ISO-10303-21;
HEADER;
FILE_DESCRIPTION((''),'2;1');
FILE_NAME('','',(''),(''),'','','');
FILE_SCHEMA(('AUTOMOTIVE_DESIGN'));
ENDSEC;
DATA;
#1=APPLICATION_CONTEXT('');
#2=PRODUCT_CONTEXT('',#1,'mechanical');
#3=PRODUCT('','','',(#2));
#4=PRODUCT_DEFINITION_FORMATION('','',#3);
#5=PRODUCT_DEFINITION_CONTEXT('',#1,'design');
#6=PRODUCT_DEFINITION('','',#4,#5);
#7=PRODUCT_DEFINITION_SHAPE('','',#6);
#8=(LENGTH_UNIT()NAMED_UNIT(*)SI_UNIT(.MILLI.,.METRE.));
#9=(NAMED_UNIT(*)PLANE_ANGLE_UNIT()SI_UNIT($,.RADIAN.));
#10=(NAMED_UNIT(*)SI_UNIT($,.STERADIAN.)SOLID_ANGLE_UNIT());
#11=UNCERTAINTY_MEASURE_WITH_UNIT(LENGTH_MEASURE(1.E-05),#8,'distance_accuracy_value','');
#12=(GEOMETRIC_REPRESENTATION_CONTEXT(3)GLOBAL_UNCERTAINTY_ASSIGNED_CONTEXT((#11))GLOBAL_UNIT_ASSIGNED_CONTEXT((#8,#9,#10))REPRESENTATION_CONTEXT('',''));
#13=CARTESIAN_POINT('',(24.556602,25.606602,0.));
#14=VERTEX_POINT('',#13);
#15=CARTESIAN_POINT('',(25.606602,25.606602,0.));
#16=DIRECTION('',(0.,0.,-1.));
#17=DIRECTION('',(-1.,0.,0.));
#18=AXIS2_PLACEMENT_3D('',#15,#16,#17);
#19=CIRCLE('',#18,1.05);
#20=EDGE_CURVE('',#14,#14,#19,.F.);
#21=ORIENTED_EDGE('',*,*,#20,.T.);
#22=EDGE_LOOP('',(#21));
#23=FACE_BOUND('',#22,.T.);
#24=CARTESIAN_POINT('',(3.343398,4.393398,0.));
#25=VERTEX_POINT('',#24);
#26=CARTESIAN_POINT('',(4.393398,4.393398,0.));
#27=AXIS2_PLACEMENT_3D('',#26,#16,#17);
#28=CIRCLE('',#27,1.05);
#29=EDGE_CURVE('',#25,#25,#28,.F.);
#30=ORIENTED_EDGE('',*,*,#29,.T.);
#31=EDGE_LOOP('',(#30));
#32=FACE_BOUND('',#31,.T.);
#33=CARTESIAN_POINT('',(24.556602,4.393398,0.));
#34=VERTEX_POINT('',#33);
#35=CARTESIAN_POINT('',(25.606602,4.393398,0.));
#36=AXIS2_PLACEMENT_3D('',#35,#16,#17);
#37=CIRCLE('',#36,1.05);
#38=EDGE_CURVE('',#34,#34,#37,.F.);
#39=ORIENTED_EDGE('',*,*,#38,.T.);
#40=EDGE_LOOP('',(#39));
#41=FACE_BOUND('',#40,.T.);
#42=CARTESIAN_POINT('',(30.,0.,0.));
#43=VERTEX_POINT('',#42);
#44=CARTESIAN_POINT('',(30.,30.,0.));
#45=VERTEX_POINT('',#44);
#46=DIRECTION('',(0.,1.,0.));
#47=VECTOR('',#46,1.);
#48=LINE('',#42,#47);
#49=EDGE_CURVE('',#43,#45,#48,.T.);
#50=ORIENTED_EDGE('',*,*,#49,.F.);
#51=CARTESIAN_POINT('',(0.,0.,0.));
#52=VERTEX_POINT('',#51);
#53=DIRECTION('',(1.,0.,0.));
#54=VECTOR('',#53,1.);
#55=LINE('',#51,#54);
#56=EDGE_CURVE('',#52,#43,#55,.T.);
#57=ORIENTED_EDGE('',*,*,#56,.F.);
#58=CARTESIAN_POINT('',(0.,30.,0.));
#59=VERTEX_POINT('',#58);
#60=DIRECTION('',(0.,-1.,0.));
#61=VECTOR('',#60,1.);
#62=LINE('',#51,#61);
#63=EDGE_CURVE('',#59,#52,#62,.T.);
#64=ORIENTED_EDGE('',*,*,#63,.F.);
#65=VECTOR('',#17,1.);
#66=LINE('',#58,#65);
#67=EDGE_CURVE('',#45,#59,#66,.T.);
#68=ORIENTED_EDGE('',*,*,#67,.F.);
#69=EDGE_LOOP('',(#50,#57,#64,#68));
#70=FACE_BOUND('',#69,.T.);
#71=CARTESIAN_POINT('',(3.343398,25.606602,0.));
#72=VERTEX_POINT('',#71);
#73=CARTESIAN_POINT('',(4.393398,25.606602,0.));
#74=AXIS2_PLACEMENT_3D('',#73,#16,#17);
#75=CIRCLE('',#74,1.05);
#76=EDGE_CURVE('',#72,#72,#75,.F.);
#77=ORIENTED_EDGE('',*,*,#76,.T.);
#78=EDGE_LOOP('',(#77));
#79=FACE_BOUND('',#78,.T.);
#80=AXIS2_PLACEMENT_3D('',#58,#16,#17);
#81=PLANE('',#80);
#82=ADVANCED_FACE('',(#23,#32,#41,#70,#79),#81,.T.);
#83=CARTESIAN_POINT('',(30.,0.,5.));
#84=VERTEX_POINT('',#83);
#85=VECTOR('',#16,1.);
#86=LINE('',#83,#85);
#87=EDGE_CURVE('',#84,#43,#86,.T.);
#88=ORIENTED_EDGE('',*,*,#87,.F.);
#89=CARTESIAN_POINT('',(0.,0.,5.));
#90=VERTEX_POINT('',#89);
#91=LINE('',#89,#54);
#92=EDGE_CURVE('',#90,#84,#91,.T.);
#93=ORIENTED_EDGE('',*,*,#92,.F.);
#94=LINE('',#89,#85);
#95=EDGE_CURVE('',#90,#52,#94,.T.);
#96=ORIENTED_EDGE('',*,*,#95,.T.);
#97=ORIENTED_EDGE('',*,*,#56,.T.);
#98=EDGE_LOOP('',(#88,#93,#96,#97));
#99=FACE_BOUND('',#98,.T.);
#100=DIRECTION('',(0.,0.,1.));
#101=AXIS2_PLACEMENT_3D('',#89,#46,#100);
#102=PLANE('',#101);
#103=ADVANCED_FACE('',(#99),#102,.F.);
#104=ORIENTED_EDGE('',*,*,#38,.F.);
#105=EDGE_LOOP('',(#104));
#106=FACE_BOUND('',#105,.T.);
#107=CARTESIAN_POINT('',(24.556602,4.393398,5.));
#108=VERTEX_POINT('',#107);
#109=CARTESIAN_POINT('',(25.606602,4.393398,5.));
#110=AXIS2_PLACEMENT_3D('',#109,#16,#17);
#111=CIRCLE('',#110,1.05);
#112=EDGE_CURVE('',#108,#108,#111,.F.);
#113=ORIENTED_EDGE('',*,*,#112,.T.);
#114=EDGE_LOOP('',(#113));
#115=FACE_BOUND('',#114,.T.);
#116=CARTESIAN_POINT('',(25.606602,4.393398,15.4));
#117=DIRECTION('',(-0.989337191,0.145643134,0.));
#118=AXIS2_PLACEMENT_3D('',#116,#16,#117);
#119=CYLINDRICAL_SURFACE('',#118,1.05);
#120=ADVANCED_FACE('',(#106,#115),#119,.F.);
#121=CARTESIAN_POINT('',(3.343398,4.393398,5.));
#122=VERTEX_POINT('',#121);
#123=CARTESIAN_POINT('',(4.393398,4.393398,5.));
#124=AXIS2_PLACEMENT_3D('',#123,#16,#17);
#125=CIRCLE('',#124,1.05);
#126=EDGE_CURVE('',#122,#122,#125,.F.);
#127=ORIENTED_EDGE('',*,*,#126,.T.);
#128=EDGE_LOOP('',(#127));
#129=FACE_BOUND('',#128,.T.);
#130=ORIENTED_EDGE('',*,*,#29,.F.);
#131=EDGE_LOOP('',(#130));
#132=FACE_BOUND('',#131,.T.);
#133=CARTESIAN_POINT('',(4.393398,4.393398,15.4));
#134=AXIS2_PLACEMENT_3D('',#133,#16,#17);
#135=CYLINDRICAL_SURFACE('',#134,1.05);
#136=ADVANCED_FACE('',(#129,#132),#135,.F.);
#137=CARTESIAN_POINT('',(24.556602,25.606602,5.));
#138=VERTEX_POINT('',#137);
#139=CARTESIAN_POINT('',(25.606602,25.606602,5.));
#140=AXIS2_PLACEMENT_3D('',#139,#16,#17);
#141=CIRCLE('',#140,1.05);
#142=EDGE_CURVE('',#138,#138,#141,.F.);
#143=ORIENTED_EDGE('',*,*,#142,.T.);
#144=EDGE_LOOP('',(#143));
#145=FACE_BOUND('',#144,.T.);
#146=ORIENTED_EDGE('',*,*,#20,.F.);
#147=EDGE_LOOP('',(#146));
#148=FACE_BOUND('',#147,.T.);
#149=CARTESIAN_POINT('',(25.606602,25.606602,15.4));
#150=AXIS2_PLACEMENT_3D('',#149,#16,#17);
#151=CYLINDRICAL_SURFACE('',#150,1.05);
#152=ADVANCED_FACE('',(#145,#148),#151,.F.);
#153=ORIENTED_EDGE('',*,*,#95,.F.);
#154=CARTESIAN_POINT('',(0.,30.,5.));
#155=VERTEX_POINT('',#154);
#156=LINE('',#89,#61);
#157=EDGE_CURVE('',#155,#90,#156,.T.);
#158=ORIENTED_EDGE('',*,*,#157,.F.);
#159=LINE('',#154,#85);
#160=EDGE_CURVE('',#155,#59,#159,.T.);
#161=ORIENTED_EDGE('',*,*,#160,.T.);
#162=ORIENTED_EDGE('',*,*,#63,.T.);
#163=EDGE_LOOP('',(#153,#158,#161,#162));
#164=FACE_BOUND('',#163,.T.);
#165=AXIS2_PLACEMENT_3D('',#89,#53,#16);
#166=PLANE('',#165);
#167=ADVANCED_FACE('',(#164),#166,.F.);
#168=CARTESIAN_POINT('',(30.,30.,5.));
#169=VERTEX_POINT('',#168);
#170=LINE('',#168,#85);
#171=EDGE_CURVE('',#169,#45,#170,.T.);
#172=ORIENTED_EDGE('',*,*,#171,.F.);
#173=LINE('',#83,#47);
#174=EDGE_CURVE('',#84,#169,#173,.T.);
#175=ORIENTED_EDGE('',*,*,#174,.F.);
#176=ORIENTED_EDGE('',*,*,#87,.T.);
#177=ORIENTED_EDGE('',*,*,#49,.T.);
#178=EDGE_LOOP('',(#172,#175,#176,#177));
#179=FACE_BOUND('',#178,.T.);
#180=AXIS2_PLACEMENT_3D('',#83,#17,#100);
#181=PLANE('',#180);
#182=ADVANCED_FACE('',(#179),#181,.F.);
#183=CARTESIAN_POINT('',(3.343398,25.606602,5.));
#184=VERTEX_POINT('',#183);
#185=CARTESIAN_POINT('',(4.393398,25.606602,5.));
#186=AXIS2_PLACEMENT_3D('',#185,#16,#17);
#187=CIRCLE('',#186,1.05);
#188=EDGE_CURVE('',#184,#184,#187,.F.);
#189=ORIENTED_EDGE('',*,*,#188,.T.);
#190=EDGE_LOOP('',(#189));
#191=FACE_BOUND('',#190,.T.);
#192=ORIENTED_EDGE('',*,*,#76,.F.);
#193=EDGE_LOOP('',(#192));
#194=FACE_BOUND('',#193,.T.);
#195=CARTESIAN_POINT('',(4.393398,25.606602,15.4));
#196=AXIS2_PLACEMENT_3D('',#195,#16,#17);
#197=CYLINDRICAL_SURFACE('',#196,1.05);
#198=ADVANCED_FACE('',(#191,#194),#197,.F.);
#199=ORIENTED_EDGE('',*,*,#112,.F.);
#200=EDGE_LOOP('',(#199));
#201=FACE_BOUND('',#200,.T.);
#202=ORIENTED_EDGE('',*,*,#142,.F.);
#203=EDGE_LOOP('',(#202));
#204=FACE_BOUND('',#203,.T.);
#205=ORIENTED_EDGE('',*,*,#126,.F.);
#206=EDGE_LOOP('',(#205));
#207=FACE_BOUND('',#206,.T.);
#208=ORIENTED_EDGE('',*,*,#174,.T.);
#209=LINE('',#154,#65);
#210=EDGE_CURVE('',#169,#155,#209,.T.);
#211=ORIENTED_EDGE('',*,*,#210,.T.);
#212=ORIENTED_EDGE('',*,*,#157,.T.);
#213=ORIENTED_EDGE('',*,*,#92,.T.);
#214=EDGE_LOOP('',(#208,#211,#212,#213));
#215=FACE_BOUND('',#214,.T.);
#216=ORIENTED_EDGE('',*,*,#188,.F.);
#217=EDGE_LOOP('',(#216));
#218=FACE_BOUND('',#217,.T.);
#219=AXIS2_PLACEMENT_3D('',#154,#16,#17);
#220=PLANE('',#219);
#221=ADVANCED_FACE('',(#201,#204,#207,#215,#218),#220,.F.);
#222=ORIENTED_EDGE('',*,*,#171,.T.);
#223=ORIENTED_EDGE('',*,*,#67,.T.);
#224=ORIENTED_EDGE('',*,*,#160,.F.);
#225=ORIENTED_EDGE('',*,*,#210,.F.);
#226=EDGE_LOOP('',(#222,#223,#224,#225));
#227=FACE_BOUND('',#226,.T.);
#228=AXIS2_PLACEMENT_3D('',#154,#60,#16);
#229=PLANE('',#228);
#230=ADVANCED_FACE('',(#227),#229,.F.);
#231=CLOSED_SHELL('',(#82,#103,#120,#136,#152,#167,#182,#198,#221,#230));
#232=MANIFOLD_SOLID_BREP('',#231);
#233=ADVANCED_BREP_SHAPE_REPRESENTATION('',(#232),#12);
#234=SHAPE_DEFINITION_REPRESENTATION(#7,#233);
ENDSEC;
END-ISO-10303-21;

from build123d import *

# Parameters (mm, degrees)
SKETCH1_W           = 30
SKETCH1_H           = 30
BOSS_EXTRUDE1_DEPTH = 5
CAVITY1_OUTLINE_R   = 1.05
CAVITY1_DEPTH       = 5


# Read off the part's stored shape, not the designer's step: Cavity1
with BuildPart() as part:
    # Sketch1 → Boss-Extrude1 (new body)
    with BuildSketch(Plane.XY):
        with Locations((15, 15)):
            Rectangle(SKETCH1_W, SKETCH1_H)
    extrude(amount=BOSS_EXTRUDE1_DEPTH)

    # Cavity1 outline → Cavity1 (cut)
    with BuildSketch(Plane.XY):
        with Locations((25.606601718, 25.606601718)):
            Circle(CAVITY1_OUTLINE_R)
        with Locations((25.606601718, 4.393398282)):
            Circle(CAVITY1_OUTLINE_R)
        with Locations((4.393398282, 25.606601718)):
            Circle(CAVITY1_OUTLINE_R)
        with Locations((4.393398282, 4.393398282)):
            Circle(CAVITY1_OUTLINE_R)
    extrude(amount=CAVITY1_DEPTH, mode=Mode.SUBTRACT)


solid = part.part
